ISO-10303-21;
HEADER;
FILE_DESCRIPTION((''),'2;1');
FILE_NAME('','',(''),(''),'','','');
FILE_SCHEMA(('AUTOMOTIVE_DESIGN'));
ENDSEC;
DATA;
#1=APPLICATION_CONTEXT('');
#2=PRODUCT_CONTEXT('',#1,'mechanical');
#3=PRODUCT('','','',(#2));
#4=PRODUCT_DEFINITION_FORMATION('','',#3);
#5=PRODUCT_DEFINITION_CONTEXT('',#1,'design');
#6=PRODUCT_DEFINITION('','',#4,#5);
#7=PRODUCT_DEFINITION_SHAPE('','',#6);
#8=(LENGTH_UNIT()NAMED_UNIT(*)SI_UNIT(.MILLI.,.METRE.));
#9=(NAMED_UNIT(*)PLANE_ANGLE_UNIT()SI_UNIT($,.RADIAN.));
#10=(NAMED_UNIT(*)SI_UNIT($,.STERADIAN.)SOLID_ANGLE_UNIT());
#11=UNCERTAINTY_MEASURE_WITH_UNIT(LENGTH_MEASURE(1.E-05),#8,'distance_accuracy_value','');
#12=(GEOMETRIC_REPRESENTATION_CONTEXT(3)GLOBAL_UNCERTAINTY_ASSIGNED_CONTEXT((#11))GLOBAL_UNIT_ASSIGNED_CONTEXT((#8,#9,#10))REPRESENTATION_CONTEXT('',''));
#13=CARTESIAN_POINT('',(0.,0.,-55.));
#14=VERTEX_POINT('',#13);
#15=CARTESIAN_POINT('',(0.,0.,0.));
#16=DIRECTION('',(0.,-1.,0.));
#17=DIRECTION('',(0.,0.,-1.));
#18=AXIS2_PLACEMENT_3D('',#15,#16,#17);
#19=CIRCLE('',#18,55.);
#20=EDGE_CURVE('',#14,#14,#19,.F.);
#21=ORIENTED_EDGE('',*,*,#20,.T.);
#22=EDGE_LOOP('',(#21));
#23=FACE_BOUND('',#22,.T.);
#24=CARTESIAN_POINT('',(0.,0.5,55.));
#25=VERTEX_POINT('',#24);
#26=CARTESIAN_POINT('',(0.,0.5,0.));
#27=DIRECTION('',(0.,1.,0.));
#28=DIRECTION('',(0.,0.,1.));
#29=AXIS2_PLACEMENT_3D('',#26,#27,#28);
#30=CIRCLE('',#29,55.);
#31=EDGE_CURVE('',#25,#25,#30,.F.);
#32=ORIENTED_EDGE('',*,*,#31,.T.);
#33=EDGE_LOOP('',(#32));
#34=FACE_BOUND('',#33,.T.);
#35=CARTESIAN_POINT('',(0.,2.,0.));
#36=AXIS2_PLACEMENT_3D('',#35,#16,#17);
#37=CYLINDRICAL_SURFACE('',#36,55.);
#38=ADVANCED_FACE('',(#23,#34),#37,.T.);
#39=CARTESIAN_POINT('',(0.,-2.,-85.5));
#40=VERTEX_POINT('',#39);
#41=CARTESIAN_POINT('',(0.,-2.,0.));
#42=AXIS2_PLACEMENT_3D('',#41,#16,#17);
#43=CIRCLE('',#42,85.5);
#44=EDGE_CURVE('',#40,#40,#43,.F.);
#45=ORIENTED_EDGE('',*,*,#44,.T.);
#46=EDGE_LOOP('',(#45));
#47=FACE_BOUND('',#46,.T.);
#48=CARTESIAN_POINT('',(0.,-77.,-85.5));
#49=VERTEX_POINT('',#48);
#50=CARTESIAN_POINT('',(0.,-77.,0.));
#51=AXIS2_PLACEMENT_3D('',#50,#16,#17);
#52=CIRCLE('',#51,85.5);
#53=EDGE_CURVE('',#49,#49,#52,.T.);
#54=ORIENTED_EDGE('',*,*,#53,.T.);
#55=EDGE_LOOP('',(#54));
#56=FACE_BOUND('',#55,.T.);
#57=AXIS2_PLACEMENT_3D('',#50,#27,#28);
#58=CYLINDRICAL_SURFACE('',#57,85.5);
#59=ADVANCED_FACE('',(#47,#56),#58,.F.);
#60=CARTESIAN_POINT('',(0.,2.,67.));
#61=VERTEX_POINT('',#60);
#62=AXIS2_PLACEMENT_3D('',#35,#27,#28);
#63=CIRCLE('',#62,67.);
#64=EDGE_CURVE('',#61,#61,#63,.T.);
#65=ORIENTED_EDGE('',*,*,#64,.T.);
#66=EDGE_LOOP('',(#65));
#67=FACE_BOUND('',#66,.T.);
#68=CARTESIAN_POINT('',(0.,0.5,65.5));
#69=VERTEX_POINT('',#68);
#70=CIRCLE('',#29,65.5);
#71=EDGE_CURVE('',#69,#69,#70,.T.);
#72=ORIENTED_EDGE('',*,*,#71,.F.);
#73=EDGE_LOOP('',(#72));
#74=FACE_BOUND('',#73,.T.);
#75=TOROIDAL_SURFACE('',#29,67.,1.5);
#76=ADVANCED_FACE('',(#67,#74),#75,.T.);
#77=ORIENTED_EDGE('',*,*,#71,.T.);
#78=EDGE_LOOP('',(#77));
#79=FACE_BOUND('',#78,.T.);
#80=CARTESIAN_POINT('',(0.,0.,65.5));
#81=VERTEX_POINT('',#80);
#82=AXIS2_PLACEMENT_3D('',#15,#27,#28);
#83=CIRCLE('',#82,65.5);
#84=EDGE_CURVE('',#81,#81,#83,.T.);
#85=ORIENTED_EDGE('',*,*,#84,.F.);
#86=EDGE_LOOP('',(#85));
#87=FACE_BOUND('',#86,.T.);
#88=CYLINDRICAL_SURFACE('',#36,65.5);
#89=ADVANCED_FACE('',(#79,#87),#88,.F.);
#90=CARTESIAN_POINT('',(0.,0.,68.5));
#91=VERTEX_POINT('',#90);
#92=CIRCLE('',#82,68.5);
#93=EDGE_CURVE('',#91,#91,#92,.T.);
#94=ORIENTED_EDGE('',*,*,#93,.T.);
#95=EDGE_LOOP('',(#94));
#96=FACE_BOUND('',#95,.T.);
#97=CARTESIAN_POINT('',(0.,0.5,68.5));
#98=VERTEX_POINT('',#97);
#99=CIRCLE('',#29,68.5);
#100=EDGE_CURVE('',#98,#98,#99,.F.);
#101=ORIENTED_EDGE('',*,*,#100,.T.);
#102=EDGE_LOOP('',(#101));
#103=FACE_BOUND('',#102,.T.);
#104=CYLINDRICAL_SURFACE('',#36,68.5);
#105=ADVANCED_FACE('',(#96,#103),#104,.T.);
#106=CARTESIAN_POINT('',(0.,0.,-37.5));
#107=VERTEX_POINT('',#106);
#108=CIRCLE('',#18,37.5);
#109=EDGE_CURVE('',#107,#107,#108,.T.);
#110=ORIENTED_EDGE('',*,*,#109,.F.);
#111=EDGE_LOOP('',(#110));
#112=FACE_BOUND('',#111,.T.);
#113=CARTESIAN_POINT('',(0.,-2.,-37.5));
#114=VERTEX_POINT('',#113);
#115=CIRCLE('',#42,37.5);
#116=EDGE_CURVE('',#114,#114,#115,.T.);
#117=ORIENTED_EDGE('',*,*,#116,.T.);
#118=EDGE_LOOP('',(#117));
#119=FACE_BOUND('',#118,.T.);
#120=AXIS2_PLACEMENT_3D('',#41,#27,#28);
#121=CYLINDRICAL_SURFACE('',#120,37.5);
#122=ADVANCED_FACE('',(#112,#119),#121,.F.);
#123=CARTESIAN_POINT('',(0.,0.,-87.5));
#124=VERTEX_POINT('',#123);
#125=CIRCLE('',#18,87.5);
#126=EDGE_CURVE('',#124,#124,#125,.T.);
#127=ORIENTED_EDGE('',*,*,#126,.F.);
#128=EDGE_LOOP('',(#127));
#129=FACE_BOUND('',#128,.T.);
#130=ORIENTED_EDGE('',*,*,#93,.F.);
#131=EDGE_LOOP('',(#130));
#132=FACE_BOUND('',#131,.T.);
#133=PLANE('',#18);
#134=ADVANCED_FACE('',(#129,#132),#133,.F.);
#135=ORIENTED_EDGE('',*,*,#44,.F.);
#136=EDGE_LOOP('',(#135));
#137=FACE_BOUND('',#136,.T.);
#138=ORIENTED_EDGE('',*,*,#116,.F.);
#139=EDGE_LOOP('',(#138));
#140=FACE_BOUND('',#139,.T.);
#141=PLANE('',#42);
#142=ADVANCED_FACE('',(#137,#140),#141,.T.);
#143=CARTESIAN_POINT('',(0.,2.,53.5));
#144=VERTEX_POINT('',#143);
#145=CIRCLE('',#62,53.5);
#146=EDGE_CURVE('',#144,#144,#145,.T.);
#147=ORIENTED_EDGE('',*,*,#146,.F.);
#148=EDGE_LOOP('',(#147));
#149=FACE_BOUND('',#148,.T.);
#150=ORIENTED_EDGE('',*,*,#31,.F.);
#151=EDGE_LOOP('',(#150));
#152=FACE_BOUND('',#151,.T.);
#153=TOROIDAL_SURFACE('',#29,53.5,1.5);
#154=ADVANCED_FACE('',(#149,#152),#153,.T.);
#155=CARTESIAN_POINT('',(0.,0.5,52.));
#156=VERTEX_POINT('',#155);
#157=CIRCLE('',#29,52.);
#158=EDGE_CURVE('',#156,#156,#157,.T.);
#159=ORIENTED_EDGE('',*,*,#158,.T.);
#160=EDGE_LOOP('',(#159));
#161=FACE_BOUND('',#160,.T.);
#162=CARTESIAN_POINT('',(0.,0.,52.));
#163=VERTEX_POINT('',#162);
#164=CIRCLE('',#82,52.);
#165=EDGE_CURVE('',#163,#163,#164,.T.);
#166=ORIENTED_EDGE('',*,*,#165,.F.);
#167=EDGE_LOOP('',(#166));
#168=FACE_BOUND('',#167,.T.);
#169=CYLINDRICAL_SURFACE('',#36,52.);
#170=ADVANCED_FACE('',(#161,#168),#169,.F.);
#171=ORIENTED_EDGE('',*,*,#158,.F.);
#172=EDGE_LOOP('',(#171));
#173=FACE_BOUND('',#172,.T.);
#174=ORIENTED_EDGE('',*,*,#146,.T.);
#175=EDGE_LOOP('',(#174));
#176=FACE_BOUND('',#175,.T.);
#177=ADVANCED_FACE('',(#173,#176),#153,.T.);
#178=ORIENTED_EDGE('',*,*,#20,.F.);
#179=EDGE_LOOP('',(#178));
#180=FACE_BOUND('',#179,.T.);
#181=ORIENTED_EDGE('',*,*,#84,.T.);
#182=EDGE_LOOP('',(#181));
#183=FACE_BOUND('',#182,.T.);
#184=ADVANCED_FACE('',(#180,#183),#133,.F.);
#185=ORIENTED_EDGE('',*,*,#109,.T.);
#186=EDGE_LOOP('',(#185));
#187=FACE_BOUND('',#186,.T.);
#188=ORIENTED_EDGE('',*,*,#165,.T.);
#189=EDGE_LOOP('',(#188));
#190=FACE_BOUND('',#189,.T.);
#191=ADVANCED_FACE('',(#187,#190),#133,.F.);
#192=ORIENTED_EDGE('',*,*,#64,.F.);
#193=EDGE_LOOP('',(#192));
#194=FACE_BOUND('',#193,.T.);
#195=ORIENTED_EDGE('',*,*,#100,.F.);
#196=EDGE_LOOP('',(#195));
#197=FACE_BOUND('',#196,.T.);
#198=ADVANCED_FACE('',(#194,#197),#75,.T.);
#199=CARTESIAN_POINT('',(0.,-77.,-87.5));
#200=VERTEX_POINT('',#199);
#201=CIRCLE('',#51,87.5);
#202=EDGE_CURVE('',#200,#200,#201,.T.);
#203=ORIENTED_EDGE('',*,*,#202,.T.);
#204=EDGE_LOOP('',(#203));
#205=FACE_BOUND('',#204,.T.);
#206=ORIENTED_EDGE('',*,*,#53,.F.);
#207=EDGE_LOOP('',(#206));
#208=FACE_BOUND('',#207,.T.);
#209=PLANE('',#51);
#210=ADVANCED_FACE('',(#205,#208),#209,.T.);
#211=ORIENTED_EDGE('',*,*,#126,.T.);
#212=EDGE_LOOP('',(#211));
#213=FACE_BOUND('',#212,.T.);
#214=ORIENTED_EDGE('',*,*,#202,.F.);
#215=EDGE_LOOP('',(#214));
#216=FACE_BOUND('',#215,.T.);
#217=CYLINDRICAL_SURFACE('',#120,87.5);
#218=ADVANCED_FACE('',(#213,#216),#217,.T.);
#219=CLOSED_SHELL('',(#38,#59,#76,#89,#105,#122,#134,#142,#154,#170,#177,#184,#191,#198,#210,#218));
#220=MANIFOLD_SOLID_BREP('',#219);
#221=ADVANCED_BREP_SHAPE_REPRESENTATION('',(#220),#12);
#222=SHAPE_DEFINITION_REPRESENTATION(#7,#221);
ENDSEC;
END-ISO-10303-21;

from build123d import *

# Parameters (mm, degrees)
SKETCH_1_R        = 68.5
SKETCH_1_R_2      = 65.5
EXTRUDE_1_DEPTH   = 2
SKETCH_1_R_3      = 55
SKETCH_1_R_4      = 52
EXTRUDE_1_2_DEPTH = 2
SKETCH_2_R        = 87.5
SKETCH_2_R_2      = 37.5
EXTRUDE_2_DEPTH   = 2
SKETCH_3_R        = 87.5
SKETCH_3_R_2      = 85.5
EXTRUDE_3_DEPTH   = 75
FILLET_1_R        = 1.5


with BuildPart() as part:
    # 草图1 → 凸台-拉伸1 (new body)
    with BuildSketch(Plane(origin=(0, 0, 0), x_dir=(1, 0, 0), z_dir=(0, 1, 0))):
        with Locations(Location((0, 0, 0), (0, 0, 270))):
            Circle(SKETCH_1_R)
        with Locations(Location((0, 0, 0), (0, 0, 270))):
            Circle(SKETCH_1_R_2, mode=Mode.SUBTRACT)
    extrude(amount=EXTRUDE_1_DEPTH)



with BuildPart() as body_2:
    # 草图1 → Extrude 1 2 (new body)
    with BuildSketch(Plane(origin=(0, 0, 0), x_dir=(1, 0, 0), z_dir=(0, 1, 0))):
        with Locations(Location((0, 0, 0), (0, 0, 270))):
            Circle(SKETCH_1_R_3)
        with Locations(Location((0, 0, 0), (0, 0, 270))):
            Circle(SKETCH_1_R_4, mode=Mode.SUBTRACT)
    extrude(amount=EXTRUDE_1_2_DEPTH)


with BuildPart() as part_1:
    add(part.part)

    add(body_2.part)  # 凸台-拉伸2 merges body 2
    # 草图2 → 凸台-拉伸2 (add)
    with BuildSketch(Plane.XZ):
        with Locations(Location((0, 0, 0), (0, 0, 270))):
            Circle(SKETCH_2_R)
        with Locations(Location((0, 0, 0), (0, 0, 270))):
            Circle(SKETCH_2_R_2, mode=Mode.SUBTRACT)
    extrude(amount=EXTRUDE_2_DEPTH)

    # 草图3 → 凸台-拉伸3 (add)
    with BuildSketch(Plane.XZ.offset(2)):
        with Locations(Location((0, 0, 0), (0, 0, 270))):
            Circle(SKETCH_3_R)
        with Locations(Location((0, 0, 0), (0, 0, 270))):
            Circle(SKETCH_3_R_2, mode=Mode.SUBTRACT)
    extrude(amount=EXTRUDE_3_DEPTH)

    # 圆角1
    fillet_1_edges = [part_1.edges().sort_by_distance(p)[0] for p in [
        (0, 2, -68.5),
        (0, 2, -52),
        (0, 2, -55),
        (0, 2, -65.5),
    ]]
    fillet(fillet_1_edges, radius=FILLET_1_R - 0.0001)  # a hair under: the kernel refuses the full size


solid = part_1.part
